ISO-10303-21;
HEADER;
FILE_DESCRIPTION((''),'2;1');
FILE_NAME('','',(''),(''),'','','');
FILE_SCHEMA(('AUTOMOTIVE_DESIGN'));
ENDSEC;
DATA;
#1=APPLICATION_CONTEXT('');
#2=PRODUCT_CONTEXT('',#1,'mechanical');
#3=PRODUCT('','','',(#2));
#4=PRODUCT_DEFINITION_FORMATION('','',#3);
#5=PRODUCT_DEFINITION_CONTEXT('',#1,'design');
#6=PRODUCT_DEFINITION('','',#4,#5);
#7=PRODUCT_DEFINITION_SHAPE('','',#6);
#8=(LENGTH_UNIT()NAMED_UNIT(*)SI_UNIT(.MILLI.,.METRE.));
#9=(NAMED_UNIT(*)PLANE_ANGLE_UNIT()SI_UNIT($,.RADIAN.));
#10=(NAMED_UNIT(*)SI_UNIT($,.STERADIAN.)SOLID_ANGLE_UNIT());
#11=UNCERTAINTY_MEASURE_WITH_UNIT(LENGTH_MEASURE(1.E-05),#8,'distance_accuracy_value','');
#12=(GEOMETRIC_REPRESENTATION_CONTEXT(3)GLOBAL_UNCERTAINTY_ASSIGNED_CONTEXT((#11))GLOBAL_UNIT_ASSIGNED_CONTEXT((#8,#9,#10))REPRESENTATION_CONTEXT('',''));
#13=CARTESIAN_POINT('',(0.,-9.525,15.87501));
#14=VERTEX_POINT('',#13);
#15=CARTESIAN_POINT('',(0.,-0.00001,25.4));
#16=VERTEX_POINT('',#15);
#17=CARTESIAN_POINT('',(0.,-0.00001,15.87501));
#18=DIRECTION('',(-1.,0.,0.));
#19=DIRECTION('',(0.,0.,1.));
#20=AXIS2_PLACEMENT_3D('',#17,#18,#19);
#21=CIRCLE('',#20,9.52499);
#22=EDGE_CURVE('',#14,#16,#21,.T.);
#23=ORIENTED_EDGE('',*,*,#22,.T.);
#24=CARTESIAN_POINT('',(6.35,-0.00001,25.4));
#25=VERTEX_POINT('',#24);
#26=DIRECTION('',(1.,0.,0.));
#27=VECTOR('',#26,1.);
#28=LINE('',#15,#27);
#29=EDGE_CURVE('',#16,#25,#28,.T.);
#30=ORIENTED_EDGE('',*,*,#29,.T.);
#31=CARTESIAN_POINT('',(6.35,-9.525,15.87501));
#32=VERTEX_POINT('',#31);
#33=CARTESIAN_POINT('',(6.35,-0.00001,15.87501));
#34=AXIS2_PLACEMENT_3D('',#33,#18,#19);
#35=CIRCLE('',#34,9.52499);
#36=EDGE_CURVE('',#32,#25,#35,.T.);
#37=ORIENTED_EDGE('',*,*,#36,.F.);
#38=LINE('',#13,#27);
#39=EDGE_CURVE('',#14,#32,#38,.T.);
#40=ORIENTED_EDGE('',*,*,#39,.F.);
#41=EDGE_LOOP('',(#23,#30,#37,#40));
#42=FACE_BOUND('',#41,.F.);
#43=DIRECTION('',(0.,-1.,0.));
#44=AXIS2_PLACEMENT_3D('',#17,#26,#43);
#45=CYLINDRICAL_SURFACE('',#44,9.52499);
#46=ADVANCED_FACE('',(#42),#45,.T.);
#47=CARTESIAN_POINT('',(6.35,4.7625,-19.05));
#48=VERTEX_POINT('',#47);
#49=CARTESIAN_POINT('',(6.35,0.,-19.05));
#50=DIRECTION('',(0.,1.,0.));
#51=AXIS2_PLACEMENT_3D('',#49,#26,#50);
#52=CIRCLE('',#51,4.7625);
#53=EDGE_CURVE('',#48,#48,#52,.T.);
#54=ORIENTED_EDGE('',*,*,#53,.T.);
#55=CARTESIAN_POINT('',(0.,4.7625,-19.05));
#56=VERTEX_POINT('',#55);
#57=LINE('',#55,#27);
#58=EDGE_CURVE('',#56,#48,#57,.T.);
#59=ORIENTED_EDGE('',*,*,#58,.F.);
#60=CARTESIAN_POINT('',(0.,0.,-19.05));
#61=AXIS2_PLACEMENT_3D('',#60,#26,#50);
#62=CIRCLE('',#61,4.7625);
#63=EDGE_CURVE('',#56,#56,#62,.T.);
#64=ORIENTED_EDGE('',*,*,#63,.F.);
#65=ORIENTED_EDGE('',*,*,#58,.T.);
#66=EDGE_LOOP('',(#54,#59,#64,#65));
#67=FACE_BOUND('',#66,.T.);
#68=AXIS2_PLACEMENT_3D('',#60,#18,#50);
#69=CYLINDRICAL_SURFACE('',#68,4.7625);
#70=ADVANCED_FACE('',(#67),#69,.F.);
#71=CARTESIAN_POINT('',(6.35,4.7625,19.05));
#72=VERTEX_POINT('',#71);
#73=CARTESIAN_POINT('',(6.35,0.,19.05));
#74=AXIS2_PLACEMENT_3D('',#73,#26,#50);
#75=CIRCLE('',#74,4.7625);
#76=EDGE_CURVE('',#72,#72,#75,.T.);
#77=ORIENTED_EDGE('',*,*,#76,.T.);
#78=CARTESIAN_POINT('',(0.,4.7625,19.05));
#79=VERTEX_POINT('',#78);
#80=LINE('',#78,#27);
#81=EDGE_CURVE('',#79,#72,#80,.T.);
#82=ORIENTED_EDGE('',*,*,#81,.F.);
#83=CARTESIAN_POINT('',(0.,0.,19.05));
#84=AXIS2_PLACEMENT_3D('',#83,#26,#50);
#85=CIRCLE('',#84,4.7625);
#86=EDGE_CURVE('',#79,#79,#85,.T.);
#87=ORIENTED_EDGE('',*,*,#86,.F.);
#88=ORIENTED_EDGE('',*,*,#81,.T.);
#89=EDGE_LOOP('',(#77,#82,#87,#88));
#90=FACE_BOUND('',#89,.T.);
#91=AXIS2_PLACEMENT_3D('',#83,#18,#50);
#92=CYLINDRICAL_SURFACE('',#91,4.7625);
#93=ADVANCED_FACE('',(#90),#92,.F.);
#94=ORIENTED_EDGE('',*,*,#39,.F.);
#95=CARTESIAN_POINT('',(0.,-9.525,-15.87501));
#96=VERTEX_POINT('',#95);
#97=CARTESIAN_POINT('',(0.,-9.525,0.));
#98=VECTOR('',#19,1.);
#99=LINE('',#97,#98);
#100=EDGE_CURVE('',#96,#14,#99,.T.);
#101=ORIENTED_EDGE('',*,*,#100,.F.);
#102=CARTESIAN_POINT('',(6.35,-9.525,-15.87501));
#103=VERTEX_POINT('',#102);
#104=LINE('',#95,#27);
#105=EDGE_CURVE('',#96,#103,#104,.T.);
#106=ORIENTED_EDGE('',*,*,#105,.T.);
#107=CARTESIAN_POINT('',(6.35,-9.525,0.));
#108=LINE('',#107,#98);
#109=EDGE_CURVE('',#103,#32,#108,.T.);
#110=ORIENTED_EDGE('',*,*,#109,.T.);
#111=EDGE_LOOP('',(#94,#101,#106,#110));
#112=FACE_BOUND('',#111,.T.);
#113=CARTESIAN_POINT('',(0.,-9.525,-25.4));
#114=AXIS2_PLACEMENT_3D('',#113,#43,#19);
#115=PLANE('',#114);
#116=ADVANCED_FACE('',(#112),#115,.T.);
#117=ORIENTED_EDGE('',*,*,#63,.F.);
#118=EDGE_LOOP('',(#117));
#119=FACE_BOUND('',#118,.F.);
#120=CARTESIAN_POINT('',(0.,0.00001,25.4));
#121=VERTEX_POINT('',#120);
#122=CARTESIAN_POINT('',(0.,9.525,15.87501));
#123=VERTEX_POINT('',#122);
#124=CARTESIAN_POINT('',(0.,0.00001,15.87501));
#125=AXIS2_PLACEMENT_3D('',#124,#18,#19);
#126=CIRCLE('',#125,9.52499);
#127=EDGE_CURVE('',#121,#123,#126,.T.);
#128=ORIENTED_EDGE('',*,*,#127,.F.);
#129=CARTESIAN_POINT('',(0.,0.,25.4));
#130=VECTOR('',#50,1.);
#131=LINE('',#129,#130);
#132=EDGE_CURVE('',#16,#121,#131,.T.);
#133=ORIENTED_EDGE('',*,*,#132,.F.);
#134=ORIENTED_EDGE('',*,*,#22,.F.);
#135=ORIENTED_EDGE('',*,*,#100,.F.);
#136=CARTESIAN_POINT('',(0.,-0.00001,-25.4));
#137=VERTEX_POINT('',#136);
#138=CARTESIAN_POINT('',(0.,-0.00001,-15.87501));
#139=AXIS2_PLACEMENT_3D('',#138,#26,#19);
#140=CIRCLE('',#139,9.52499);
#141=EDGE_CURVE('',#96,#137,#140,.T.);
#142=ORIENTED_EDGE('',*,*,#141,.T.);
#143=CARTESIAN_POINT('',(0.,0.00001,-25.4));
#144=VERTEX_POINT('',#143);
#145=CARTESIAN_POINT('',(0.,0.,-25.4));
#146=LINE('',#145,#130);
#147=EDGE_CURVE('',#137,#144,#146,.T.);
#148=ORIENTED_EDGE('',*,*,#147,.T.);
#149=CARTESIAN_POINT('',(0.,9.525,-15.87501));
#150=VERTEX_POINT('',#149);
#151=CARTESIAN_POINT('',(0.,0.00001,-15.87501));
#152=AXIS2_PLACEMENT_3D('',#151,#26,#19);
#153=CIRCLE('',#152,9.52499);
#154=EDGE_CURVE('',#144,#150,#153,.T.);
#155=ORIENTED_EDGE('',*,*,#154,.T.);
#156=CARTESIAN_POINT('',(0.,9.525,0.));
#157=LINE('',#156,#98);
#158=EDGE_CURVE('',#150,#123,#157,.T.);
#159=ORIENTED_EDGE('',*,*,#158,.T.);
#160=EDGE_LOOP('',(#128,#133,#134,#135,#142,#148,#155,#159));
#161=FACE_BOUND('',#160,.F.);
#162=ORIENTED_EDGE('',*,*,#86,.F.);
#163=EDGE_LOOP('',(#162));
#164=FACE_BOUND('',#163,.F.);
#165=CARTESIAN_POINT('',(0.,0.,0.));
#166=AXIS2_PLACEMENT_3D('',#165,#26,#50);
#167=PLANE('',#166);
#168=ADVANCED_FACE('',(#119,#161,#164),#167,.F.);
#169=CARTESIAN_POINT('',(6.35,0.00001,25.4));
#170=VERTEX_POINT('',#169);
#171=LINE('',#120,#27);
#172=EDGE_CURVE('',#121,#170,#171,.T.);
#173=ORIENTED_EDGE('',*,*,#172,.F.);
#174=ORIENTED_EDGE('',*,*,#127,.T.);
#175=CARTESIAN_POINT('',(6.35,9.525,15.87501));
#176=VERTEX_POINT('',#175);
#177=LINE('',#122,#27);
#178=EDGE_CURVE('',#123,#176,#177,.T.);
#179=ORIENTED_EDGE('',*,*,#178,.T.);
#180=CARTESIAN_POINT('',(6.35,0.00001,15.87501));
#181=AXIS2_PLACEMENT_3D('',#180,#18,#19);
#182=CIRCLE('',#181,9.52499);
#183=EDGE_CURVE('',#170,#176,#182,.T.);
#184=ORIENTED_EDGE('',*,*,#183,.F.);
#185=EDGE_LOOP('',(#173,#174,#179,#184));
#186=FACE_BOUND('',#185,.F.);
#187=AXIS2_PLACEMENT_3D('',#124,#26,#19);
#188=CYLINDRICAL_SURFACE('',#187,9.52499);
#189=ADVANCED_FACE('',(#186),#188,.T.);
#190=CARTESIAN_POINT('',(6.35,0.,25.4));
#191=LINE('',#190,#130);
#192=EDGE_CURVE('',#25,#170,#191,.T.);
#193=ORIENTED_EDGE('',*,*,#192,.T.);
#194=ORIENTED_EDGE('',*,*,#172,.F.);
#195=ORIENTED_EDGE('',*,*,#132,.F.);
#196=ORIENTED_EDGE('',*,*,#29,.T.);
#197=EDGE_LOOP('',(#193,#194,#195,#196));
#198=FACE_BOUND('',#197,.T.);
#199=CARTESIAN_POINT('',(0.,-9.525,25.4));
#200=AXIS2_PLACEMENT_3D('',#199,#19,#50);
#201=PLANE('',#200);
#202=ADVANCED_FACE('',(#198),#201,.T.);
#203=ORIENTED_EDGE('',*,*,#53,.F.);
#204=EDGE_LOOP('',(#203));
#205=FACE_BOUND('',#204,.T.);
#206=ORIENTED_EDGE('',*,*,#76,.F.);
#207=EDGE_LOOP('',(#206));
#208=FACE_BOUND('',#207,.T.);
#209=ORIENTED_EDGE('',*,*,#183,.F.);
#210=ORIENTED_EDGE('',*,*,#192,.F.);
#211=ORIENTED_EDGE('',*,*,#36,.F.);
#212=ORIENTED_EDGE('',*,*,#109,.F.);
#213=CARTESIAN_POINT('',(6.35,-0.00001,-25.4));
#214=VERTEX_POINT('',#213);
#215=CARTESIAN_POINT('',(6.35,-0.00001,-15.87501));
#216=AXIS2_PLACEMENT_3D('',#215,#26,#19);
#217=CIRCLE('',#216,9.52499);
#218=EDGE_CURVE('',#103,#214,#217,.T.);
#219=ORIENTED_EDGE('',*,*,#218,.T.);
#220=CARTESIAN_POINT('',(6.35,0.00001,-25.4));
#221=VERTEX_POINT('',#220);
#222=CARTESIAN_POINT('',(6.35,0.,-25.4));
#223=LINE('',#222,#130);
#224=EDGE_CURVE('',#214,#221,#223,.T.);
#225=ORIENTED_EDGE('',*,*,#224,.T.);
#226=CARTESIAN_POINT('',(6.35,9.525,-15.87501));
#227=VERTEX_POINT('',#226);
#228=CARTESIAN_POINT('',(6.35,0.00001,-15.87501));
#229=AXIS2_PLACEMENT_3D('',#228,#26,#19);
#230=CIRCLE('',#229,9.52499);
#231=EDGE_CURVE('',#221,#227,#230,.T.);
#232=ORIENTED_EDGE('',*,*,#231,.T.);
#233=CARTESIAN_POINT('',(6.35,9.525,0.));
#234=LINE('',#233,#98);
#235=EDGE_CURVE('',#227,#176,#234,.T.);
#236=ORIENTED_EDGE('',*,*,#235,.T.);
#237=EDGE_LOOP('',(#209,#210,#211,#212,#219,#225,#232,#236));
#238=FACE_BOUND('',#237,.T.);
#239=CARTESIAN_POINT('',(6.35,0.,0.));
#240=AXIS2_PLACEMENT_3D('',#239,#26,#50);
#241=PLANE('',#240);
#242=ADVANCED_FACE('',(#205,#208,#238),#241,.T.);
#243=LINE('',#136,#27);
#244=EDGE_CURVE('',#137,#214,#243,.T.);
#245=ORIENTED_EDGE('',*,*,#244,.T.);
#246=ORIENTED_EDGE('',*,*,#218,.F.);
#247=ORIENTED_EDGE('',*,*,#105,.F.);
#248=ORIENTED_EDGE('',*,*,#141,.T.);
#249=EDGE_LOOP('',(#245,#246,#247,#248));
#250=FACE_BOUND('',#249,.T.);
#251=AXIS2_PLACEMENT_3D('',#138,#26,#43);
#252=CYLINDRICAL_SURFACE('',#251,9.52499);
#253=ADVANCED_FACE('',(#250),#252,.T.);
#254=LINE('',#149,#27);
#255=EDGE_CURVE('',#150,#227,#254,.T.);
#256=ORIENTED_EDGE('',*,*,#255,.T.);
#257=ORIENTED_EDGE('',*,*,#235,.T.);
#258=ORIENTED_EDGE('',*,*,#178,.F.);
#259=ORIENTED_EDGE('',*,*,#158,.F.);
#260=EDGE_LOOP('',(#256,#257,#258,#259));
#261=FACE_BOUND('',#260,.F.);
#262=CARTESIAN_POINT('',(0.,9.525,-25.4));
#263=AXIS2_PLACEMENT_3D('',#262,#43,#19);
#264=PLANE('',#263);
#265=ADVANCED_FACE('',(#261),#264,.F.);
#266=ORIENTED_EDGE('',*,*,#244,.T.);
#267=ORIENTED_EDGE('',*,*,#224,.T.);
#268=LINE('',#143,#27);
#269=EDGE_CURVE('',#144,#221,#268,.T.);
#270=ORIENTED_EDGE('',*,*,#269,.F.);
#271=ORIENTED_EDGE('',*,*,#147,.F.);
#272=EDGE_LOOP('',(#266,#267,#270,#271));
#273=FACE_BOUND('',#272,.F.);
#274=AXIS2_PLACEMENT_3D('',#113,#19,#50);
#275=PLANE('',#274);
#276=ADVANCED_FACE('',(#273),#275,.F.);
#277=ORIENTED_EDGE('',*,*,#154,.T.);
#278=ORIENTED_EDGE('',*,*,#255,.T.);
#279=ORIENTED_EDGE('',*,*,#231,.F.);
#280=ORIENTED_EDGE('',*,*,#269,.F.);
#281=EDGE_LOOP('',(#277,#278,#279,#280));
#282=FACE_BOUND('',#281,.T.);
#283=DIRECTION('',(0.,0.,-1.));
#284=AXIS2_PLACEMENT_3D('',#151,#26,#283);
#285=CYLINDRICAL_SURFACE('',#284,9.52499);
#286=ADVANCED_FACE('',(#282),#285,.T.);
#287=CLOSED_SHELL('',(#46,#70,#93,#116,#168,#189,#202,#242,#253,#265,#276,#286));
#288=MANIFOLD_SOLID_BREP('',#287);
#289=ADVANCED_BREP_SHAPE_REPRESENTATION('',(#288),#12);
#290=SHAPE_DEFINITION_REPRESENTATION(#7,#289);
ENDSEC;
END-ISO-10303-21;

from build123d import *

# Parameters (mm, degrees)
F0_W     = 19.05
F0_H     = 50.8
F0_R     = 4.7625
F1_DEPTH = 6.35
F2_R     = 9.52499


# Not quite as in the source:
# - a fillet or chamfer is up to 0.001 mm smaller than in the source, because OpenCascade refuses the exact size


with BuildPart() as f1:
    # F0 (on Right) → F1 (new body)
    with BuildSketch(Plane.YZ):
        Rectangle(F0_W, F0_H)
        with Locations((0, -19.05)):
            Circle(F0_R, mode=Mode.SUBTRACT)
        with Locations((0, 19.05)):
            Circle(F0_R, mode=Mode.SUBTRACT)
    extrude(amount=F1_DEPTH)

    # F2 (radius 9.525 in the source; OpenCascade refuses exactly that, so slightly less here)
    f2_edges = [f1.edges().sort_by_distance(p)[0] for p in [
        (3.175, 9.525, 25.4),
        (3.175, -9.525, 25.4),
        (3.175, 9.525, -25.4),
        (3.175, -9.525, -25.4),
    ]]
    fillet(f2_edges, radius=F2_R)


solid = f1.part
